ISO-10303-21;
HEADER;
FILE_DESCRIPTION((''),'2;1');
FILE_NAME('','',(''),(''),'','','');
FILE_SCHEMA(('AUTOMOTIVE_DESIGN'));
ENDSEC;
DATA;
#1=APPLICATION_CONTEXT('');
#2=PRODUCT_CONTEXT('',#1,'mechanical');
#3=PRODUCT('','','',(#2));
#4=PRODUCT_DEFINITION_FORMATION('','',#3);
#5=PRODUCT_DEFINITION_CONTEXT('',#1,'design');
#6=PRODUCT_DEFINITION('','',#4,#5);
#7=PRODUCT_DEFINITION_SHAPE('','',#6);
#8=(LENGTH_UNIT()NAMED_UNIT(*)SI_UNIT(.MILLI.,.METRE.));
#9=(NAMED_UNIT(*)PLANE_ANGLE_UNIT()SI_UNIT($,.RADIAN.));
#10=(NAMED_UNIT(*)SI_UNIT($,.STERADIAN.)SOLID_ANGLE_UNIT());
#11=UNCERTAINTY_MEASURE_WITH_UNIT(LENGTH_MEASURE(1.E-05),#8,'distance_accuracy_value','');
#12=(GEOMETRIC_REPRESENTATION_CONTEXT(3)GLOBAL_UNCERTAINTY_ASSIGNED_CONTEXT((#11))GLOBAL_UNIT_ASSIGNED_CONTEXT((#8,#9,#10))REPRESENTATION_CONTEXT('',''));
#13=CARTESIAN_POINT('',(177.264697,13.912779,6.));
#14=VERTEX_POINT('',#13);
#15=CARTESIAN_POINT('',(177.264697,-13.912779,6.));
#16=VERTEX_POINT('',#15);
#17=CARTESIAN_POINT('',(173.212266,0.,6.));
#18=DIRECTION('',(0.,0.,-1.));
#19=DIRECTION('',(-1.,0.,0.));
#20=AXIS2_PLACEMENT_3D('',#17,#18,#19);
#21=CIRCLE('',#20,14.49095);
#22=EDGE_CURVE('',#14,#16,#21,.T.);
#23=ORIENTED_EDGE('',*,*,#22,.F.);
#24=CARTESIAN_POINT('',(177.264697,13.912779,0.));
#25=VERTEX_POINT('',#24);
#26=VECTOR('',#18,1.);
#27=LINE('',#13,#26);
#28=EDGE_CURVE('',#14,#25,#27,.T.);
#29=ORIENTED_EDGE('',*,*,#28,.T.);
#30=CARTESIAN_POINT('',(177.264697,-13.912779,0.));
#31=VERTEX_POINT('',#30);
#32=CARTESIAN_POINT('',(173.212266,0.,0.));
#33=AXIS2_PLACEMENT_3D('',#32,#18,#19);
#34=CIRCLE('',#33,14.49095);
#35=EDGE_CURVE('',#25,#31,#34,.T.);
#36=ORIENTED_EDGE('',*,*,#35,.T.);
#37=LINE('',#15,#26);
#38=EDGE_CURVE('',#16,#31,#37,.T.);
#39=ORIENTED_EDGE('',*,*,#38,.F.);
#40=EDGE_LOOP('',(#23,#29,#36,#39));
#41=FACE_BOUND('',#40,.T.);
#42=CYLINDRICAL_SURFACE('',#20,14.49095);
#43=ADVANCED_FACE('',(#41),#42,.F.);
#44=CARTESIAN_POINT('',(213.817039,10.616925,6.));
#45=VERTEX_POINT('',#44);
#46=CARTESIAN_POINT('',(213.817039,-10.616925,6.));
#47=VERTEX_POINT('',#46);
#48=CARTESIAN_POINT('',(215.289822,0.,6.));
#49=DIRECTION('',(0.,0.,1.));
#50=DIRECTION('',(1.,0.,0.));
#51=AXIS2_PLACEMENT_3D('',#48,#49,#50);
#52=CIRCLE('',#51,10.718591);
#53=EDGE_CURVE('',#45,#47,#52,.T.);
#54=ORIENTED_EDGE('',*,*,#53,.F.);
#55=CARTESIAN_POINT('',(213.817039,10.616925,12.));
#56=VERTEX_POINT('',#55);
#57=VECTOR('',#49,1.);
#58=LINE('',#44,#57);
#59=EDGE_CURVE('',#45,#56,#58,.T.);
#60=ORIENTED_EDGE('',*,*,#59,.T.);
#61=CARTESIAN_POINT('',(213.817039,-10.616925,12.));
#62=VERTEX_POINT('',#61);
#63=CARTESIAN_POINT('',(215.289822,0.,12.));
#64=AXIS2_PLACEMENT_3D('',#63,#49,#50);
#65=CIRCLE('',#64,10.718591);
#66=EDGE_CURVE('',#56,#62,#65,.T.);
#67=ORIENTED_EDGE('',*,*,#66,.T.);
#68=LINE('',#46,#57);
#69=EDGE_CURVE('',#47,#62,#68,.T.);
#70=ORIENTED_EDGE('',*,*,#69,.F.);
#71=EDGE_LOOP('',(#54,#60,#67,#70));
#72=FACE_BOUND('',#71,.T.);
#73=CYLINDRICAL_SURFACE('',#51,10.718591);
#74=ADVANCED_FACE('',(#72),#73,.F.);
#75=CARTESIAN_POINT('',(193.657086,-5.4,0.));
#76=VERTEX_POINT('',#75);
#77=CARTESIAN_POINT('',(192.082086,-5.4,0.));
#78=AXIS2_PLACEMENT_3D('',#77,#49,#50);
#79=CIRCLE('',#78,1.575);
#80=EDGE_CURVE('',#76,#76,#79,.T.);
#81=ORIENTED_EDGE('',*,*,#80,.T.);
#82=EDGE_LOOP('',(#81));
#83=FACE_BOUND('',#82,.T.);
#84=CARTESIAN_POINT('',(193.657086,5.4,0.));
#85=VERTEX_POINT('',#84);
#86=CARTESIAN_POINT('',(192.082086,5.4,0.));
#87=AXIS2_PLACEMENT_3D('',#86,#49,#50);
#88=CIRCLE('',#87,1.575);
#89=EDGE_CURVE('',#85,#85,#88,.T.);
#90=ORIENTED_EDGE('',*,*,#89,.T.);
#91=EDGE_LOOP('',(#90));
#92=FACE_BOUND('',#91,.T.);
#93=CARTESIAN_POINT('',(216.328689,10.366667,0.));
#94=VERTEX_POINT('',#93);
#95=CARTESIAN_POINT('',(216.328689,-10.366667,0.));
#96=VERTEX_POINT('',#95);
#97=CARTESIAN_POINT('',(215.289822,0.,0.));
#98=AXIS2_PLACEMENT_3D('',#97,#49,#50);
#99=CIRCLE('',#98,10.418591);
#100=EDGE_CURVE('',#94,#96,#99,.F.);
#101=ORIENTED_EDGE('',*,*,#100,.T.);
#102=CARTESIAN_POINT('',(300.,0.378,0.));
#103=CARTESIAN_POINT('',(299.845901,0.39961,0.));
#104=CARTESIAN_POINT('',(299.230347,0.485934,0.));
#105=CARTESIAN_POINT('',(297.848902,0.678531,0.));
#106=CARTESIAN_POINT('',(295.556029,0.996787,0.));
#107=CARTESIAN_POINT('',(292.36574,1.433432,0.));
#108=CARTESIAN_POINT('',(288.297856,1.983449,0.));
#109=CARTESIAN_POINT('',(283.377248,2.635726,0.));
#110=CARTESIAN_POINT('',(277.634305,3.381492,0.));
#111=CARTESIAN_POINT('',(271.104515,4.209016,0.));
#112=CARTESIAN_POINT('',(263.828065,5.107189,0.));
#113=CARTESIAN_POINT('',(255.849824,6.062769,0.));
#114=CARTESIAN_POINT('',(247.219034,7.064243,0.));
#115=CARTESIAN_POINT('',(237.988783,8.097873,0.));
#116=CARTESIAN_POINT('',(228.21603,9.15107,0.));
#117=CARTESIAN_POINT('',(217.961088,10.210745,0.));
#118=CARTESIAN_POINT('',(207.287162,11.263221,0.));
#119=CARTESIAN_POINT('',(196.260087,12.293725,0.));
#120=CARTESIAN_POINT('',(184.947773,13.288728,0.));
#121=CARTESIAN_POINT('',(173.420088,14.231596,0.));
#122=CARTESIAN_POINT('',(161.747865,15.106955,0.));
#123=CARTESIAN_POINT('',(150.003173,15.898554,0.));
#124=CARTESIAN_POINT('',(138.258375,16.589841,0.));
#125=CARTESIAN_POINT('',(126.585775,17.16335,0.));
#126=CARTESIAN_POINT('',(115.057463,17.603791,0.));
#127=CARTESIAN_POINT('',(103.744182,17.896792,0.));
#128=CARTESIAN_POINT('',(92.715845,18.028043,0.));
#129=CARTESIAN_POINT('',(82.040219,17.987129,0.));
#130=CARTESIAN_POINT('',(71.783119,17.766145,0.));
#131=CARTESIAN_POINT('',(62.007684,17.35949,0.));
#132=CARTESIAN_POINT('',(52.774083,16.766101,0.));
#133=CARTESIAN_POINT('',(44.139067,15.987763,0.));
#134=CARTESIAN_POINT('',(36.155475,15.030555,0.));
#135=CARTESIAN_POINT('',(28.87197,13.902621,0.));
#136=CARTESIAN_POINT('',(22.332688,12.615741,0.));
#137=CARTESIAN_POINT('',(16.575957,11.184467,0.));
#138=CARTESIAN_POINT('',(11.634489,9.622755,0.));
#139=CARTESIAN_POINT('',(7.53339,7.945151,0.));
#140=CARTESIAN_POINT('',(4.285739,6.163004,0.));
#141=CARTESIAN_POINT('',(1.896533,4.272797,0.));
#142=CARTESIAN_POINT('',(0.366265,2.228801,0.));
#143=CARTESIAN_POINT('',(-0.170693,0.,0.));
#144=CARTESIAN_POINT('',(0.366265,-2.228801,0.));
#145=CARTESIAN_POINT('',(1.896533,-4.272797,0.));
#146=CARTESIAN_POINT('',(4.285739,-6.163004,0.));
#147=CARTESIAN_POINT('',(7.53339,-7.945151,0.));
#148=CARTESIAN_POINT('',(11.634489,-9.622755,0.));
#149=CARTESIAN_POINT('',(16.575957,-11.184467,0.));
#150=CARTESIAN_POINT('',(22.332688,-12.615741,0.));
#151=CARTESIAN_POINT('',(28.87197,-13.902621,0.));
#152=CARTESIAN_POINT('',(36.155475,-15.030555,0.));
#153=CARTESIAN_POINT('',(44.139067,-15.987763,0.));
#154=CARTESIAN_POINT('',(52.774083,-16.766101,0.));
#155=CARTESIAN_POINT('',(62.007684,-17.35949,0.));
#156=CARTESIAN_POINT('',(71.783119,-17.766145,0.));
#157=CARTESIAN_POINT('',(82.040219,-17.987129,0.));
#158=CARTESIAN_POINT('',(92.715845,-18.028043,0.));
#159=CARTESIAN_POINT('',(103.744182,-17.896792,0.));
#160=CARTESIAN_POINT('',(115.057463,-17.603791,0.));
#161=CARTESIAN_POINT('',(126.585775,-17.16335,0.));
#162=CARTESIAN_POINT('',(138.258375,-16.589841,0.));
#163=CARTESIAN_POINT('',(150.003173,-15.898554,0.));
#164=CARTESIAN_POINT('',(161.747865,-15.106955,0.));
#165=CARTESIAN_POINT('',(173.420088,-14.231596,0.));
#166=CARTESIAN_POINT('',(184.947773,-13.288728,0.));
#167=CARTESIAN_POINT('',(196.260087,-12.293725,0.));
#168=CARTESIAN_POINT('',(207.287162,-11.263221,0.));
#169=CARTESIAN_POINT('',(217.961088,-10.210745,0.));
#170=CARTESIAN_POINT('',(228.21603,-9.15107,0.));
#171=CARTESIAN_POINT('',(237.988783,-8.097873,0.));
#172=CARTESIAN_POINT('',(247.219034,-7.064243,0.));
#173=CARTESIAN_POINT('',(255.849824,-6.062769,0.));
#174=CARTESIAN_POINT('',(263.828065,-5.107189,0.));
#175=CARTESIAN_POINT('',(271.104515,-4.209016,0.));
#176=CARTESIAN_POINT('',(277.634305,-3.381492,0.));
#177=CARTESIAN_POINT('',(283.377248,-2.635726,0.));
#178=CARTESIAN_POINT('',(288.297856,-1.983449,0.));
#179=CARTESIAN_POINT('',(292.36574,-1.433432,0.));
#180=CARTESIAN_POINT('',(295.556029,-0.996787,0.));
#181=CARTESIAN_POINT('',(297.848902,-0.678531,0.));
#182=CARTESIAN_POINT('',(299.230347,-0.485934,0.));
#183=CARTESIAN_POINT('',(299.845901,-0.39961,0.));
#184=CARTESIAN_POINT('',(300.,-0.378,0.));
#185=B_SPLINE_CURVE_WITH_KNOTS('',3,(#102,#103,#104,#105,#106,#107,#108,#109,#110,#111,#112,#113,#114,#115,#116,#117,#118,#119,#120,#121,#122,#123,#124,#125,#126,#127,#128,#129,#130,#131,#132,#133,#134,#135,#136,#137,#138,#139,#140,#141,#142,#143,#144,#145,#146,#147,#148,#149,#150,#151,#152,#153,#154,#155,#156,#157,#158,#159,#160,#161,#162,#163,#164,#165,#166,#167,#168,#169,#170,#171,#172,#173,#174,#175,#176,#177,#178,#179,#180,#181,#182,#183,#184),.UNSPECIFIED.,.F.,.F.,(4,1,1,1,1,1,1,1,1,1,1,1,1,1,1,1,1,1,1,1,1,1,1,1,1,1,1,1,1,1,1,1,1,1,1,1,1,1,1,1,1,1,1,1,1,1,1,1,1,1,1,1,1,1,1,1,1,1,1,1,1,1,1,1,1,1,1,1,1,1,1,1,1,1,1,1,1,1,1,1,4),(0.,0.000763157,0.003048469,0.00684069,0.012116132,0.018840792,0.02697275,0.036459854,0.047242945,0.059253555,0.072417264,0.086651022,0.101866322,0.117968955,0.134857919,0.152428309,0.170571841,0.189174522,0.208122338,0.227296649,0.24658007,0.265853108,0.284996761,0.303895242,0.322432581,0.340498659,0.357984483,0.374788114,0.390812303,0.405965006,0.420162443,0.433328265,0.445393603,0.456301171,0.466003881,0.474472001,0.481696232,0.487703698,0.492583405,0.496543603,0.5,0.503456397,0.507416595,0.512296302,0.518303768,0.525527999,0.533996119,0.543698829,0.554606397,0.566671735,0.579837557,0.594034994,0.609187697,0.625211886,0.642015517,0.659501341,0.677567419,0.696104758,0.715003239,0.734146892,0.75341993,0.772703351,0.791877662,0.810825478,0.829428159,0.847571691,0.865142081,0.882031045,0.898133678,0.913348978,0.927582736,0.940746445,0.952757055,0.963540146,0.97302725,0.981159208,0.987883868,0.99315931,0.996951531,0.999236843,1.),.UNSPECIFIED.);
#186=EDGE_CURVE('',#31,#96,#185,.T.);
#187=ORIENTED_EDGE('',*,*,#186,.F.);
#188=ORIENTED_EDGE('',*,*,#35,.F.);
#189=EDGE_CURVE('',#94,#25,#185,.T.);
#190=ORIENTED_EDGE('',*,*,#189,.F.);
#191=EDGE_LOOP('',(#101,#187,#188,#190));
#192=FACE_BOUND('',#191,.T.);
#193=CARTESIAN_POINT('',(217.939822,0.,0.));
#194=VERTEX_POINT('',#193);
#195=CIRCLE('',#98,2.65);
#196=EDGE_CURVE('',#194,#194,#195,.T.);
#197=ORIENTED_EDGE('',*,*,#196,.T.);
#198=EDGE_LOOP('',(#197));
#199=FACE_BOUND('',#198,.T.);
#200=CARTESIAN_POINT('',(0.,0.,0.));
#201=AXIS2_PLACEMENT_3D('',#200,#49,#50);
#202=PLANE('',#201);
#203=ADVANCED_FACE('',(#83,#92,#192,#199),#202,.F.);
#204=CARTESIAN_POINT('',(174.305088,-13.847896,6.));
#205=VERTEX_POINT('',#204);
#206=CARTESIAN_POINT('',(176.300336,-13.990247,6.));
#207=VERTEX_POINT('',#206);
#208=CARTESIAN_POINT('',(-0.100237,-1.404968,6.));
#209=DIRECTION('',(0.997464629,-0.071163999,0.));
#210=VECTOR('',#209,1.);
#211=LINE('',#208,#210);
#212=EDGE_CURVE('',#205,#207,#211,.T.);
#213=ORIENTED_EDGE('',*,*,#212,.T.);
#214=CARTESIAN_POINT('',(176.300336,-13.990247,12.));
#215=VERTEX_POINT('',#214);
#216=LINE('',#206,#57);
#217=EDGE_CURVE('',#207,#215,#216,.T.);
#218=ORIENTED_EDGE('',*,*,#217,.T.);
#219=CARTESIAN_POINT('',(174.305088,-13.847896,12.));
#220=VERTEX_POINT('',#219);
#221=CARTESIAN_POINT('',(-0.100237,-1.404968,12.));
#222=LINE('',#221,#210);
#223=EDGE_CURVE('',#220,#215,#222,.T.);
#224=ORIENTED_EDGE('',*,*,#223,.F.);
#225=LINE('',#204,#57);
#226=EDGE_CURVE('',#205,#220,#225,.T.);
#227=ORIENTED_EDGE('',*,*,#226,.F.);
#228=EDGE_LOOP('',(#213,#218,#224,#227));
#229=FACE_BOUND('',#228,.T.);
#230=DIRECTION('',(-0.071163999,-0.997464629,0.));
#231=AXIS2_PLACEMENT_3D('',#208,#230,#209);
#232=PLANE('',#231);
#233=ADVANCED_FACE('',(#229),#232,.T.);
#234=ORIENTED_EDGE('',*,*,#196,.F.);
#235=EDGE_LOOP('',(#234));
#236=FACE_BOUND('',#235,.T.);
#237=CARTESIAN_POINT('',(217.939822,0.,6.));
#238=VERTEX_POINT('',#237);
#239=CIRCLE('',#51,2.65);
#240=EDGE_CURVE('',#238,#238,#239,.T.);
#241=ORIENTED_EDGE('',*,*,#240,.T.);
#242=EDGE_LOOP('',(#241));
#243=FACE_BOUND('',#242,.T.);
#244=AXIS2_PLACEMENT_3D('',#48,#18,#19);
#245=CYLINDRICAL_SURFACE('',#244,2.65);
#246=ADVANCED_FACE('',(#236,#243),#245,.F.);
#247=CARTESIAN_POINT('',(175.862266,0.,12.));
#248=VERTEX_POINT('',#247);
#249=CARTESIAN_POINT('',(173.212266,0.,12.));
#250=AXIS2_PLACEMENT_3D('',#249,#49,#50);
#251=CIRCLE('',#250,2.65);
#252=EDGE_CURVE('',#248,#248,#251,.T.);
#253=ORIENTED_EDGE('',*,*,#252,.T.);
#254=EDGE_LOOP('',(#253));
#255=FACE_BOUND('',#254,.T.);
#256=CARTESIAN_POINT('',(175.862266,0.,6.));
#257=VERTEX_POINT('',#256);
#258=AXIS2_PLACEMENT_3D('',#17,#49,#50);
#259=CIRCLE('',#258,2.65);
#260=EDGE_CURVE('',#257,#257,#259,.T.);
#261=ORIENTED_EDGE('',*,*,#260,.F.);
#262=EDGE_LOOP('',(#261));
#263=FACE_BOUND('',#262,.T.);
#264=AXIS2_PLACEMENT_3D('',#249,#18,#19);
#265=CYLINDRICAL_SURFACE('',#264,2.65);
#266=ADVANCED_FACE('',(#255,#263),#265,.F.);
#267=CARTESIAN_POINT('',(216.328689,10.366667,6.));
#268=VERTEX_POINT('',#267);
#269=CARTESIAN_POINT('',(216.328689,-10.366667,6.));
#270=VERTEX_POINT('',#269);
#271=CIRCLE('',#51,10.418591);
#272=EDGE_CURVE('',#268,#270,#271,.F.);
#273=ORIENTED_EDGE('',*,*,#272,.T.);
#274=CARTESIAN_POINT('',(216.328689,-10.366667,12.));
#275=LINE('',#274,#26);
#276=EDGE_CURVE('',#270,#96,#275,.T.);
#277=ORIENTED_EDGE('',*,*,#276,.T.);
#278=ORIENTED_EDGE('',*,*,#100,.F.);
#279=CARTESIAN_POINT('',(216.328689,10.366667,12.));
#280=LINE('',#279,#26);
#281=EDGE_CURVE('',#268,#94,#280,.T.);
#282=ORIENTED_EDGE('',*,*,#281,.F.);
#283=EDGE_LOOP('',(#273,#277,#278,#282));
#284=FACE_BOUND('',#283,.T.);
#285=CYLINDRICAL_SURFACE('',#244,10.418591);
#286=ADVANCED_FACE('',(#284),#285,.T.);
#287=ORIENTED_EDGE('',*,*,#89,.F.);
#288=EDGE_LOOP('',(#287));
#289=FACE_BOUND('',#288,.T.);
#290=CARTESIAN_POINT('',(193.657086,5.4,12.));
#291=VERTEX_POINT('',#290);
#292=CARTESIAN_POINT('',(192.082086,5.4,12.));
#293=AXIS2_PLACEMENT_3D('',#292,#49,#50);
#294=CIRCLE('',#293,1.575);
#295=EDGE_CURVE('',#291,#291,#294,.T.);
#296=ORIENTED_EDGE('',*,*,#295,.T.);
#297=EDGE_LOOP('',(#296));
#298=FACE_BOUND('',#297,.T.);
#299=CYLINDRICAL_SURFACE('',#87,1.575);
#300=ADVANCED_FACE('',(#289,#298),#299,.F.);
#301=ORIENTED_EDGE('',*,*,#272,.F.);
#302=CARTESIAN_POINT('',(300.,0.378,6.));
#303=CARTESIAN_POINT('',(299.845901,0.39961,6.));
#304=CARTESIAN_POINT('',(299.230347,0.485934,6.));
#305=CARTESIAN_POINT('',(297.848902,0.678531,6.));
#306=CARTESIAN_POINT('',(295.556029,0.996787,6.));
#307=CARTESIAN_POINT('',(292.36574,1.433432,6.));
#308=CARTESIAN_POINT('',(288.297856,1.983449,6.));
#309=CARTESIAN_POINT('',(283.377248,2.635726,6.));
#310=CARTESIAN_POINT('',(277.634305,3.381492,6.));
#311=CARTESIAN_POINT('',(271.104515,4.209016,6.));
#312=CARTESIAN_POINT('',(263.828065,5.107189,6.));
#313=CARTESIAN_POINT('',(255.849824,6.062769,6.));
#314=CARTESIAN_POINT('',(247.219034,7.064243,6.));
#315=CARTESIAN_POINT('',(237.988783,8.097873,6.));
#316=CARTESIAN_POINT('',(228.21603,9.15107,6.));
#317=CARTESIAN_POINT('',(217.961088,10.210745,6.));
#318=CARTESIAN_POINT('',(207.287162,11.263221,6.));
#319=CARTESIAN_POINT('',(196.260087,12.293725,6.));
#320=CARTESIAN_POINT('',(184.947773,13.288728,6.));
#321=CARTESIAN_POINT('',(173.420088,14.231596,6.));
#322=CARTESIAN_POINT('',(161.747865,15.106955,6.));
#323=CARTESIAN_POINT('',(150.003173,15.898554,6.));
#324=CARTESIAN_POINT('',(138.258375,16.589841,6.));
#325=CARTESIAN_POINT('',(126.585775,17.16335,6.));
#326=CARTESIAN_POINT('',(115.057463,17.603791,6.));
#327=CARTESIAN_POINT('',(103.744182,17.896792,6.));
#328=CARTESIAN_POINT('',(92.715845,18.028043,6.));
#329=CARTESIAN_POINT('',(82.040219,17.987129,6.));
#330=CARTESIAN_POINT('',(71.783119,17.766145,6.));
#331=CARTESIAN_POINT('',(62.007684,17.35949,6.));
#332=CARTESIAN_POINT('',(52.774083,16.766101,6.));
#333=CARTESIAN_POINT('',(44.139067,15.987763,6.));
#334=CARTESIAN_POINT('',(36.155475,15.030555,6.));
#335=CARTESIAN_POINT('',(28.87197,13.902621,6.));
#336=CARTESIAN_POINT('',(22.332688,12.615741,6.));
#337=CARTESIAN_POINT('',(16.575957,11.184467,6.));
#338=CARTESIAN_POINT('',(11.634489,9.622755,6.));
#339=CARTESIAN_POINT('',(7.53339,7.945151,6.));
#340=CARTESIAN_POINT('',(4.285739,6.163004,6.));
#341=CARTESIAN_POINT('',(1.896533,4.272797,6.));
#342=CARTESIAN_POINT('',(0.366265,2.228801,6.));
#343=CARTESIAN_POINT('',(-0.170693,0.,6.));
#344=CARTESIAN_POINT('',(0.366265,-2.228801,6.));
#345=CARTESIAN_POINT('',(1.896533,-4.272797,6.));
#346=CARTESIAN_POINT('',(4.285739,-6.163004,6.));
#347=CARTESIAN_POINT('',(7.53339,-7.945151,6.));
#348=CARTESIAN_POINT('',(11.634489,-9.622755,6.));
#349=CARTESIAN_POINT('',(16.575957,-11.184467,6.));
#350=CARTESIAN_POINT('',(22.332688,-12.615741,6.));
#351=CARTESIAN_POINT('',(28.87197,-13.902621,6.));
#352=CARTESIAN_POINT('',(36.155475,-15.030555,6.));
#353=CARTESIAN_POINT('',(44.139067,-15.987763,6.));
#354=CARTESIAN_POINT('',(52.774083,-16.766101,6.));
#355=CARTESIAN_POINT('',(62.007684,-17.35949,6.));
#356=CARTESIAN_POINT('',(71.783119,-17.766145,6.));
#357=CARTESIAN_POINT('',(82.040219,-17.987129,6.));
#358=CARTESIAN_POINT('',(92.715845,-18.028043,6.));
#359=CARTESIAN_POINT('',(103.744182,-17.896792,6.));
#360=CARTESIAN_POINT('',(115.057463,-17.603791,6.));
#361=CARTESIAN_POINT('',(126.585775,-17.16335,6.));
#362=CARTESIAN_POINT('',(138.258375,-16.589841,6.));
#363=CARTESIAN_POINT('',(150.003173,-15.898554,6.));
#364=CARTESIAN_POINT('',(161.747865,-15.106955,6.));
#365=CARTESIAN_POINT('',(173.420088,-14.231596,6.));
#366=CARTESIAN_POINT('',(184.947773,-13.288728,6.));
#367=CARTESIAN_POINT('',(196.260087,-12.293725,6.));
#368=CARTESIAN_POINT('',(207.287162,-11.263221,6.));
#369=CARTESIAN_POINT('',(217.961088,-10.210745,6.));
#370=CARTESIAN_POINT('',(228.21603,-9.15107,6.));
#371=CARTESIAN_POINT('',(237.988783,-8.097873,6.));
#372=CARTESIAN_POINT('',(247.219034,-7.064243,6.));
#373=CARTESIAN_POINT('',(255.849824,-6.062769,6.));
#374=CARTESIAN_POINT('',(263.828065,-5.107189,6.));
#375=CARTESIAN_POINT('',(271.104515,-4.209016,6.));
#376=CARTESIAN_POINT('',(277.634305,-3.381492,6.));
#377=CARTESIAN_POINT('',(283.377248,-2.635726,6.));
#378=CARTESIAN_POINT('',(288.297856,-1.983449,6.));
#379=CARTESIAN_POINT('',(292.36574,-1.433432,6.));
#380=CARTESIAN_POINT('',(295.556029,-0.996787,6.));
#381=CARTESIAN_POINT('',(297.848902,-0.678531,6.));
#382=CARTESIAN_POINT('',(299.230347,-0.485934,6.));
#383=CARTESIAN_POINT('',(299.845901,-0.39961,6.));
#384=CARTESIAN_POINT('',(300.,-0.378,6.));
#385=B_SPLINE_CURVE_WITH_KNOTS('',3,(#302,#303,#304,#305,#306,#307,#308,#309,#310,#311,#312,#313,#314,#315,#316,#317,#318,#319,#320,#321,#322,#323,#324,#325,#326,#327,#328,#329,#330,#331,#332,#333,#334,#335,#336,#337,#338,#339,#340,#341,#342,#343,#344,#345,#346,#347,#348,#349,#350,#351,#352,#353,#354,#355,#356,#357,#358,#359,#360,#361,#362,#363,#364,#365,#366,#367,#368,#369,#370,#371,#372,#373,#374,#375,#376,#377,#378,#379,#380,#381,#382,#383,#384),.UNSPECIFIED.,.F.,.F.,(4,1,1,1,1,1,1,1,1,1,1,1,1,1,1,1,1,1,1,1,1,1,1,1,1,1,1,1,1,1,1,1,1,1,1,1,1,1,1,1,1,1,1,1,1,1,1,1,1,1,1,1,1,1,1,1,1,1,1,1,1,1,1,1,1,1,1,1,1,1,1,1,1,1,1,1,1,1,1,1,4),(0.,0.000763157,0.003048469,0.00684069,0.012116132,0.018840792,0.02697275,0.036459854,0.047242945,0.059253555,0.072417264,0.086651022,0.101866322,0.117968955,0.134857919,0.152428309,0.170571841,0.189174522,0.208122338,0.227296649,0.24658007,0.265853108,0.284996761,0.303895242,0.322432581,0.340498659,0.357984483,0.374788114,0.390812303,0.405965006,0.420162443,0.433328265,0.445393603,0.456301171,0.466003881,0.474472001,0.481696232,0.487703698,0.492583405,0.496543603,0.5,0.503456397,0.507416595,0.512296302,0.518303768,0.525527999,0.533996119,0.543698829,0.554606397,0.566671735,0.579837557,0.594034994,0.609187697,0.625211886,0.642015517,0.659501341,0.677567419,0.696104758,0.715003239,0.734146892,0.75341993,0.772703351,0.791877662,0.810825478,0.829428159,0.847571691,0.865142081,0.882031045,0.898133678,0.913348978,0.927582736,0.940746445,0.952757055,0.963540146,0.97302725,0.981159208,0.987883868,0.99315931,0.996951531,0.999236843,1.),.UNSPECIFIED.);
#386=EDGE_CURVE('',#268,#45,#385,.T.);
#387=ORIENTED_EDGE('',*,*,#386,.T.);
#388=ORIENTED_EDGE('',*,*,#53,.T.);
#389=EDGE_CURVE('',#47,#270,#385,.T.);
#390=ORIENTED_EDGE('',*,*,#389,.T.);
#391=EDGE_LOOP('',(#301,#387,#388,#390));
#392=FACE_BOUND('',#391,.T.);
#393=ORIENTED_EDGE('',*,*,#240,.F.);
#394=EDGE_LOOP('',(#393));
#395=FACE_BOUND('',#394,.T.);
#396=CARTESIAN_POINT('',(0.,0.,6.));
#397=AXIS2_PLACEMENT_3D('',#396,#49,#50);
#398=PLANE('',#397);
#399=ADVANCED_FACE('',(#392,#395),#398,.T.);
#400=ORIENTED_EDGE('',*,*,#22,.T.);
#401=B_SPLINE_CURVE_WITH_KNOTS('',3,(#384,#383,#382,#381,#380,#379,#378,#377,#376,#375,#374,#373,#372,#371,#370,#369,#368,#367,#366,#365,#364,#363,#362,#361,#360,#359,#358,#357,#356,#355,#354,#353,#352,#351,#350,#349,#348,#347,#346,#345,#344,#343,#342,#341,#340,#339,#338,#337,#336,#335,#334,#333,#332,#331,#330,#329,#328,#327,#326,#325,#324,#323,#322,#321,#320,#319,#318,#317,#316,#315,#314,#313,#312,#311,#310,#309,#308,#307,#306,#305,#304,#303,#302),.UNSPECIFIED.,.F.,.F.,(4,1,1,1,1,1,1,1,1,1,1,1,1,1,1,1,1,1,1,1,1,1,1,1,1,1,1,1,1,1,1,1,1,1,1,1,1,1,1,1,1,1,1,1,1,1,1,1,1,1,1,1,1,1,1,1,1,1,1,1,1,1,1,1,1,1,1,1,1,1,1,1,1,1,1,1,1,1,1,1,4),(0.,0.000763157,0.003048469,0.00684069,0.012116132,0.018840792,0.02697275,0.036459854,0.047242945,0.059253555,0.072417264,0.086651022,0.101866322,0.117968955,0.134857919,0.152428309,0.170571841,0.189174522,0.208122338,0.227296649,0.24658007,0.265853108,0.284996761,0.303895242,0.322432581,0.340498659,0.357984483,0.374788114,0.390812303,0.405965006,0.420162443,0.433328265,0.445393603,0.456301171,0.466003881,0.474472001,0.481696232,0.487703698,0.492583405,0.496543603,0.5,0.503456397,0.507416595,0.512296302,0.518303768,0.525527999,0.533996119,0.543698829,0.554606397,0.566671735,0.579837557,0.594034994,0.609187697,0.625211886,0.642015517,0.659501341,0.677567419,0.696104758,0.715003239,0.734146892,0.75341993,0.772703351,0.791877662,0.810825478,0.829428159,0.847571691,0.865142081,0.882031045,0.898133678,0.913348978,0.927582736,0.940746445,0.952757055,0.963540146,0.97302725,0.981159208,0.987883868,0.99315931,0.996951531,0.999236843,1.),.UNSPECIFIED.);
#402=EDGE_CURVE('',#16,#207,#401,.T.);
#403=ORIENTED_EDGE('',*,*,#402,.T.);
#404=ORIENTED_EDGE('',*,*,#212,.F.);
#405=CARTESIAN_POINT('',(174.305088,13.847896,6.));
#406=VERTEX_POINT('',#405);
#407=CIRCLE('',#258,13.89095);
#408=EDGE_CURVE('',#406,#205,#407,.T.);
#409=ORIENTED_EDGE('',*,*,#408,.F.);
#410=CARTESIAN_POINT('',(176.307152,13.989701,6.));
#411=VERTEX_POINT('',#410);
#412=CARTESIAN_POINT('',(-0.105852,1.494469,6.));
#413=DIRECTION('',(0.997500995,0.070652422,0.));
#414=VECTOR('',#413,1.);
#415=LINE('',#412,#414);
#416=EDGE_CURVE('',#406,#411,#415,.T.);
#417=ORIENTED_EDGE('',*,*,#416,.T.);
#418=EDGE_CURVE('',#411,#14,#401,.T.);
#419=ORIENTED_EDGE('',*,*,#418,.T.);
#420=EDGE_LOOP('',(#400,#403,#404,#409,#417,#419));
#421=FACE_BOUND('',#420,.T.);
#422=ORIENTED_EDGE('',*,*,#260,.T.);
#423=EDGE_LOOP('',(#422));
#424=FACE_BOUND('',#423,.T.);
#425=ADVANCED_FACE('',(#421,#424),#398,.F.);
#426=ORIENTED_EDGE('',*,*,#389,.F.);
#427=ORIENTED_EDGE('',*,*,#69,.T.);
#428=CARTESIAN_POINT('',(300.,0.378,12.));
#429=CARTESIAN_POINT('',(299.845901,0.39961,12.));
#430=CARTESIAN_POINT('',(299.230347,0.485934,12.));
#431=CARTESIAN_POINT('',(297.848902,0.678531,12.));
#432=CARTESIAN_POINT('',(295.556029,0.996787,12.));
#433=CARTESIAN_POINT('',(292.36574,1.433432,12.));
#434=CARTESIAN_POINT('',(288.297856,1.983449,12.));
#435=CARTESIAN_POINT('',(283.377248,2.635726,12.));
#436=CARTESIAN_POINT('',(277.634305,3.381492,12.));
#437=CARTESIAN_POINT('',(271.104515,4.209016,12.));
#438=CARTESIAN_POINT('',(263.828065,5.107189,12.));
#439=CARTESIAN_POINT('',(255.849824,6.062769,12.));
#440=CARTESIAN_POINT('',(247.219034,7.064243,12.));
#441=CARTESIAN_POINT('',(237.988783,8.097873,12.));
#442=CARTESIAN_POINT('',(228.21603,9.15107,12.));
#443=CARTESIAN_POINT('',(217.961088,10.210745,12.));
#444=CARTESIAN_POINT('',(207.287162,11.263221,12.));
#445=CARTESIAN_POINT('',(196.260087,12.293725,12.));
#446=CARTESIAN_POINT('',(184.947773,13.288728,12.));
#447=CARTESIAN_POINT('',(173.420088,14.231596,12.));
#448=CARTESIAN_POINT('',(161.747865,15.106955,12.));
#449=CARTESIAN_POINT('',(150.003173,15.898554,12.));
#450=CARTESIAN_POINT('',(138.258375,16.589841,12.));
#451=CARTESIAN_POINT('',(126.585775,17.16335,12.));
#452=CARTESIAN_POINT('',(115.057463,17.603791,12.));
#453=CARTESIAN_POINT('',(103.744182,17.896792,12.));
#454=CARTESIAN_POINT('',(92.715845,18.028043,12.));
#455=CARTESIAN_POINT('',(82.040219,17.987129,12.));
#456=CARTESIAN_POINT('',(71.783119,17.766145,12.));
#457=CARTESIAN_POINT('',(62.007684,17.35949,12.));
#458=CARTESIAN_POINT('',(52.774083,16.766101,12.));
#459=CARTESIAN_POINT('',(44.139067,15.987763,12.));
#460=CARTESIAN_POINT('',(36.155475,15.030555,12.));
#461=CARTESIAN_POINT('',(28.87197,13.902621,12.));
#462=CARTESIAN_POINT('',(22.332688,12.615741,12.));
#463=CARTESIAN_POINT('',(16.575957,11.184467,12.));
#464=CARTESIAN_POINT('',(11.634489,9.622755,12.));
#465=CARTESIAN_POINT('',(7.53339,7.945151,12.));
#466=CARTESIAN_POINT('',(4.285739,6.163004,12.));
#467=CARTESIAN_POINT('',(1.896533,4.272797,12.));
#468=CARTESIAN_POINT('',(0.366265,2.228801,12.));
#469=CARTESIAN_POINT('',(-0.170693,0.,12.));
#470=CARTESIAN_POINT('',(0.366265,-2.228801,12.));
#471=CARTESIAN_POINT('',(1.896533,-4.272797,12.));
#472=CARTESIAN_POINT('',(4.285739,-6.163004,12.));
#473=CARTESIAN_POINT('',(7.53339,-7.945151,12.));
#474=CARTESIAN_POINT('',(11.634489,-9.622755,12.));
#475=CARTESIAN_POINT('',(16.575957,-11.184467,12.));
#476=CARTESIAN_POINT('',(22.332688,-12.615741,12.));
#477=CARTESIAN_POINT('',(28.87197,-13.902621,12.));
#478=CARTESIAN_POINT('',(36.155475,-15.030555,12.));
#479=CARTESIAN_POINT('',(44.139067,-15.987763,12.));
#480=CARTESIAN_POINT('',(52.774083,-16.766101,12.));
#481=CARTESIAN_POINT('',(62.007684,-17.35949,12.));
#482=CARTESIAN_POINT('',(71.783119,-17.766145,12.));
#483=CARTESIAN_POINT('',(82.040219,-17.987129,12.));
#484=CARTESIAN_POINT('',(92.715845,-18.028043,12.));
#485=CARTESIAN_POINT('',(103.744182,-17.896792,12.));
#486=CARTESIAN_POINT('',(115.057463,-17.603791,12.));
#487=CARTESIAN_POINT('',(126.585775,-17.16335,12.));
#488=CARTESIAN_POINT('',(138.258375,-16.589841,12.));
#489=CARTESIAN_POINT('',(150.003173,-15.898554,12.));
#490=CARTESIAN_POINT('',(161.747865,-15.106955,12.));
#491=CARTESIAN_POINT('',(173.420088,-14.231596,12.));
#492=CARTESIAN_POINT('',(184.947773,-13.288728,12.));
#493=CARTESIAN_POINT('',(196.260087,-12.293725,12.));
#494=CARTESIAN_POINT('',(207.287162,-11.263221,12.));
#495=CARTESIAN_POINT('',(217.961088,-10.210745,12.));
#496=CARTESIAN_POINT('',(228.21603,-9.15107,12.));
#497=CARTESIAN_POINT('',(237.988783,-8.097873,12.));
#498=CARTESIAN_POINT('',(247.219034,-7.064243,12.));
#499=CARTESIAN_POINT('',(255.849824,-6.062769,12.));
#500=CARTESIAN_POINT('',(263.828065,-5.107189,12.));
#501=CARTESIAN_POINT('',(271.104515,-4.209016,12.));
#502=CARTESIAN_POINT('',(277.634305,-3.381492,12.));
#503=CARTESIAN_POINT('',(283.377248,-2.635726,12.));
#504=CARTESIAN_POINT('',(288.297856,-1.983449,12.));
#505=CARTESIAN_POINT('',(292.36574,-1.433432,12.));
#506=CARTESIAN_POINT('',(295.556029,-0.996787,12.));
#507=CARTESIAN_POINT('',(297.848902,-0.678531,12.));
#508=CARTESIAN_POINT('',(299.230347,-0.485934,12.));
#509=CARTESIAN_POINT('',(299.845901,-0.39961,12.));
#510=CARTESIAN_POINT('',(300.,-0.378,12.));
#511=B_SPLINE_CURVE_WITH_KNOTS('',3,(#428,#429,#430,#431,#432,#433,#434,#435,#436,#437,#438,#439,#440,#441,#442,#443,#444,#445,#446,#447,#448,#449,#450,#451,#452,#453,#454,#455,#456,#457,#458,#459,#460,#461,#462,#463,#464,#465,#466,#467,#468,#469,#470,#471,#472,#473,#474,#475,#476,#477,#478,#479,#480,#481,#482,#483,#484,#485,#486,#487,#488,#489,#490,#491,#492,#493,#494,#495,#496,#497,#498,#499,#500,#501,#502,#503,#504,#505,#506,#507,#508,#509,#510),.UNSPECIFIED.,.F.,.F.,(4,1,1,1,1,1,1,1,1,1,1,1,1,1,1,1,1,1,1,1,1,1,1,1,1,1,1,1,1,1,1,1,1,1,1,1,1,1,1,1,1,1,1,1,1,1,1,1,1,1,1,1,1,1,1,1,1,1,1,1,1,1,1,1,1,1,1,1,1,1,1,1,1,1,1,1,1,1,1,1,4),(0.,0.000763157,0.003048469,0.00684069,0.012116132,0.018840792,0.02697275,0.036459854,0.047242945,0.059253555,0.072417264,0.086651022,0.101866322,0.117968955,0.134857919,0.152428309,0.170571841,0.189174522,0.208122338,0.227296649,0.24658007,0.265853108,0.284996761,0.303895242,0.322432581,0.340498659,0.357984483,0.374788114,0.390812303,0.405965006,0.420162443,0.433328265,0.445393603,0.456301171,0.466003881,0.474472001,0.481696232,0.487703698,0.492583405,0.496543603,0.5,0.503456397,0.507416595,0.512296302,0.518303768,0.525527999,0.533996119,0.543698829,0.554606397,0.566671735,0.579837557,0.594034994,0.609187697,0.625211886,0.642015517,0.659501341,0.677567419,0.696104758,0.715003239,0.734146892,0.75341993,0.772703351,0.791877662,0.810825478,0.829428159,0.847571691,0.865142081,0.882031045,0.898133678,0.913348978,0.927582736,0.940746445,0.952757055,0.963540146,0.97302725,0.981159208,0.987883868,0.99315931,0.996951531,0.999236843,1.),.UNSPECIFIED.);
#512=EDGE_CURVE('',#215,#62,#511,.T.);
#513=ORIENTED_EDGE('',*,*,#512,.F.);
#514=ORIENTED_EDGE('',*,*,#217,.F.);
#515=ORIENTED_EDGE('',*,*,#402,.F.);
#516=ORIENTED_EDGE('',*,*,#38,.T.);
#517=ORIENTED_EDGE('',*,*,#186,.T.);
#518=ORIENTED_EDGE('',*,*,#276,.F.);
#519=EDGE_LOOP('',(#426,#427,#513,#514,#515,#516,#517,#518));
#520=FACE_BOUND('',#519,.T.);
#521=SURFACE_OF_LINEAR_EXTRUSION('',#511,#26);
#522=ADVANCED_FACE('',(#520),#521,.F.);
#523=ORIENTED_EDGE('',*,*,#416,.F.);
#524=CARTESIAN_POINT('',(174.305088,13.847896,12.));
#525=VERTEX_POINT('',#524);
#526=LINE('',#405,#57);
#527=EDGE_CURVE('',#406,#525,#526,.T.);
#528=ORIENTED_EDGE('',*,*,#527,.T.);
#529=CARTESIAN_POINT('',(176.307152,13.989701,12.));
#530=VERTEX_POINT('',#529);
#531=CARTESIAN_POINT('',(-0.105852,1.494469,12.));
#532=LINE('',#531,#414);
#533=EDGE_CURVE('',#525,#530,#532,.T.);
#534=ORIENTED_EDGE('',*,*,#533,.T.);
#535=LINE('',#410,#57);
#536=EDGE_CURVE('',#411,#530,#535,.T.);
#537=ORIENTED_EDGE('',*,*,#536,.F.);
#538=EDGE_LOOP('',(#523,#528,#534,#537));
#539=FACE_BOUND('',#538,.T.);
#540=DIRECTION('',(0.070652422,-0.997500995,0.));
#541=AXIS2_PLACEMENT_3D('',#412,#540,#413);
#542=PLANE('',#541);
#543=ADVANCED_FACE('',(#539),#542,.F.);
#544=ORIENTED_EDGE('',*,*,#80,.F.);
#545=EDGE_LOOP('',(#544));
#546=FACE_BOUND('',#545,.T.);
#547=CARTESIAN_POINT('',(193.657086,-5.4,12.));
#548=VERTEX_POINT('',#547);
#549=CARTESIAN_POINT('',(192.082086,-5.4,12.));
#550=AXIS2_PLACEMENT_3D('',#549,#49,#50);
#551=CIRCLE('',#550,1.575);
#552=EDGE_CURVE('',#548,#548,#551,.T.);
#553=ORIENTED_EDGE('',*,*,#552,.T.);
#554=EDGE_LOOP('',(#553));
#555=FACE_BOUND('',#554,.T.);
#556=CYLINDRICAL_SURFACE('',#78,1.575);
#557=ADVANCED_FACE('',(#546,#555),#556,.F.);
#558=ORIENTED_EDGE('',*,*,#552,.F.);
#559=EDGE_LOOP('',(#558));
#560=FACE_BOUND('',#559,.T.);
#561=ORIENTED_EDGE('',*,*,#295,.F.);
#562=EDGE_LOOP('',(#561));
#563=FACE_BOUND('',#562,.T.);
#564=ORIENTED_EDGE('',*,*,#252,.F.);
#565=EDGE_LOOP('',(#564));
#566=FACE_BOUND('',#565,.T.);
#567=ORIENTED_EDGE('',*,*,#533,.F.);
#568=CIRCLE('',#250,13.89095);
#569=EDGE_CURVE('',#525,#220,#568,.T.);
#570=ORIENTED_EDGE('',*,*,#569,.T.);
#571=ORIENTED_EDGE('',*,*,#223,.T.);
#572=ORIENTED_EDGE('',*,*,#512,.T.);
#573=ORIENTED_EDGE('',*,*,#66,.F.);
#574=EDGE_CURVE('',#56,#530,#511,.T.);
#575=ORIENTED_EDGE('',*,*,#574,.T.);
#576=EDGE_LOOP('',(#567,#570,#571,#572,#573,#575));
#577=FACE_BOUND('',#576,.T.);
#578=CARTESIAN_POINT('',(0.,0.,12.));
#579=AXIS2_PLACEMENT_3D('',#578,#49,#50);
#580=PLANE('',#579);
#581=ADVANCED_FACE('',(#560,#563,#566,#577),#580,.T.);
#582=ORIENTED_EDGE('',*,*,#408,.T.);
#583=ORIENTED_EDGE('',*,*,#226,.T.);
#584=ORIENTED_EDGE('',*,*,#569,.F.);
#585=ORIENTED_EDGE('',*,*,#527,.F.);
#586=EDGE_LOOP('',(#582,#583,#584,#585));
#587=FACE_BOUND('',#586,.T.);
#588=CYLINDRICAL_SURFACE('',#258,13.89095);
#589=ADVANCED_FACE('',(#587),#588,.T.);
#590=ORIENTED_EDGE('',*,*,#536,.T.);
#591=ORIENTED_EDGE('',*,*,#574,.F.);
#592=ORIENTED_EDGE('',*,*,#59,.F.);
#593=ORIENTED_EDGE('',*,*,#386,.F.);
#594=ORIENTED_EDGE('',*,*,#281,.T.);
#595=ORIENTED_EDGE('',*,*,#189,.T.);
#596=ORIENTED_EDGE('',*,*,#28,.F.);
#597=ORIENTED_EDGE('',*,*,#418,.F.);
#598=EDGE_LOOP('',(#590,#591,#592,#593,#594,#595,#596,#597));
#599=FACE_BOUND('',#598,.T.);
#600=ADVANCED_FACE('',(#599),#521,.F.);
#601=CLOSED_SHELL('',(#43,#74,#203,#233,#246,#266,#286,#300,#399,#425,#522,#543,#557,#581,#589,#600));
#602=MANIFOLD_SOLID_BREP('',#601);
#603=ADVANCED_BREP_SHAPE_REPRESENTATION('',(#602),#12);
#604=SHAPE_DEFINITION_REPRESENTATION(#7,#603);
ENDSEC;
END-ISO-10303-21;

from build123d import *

# Parameters (mm, degrees)
BOSS_EXTRUDE13_START = 6
BOSS_EXTRUDE13_DEPTH = 6
BOSS_EXTRUDE14_DEPTH = 12
SKETCH2_19_R         = 10.418590799
SKETCH2_19_R_2       = 2.65
BOSS_EXTRUDE15_DEPTH = 6
CUT_EXTRUDE1_START   = -6
CUT_EXTRUDE1_DEPTH   = 6
CUT_EXTRUDE2_START   = -12
CUT_EXTRUDE2_DEPTH   = 6
CUT_EXTRUDE4_DEPTH   = 6
SKETCH6_R            = 1.575
CUT_EXTRUDE5_DEPTH   = 227.459741668


# Read off the part's stored shape, not the designer's step: Cut-Extrude2
with BuildPart() as part:
    # Sketch2 → Boss-Extrude13 (new body)
    with BuildSketch(Plane.XY.offset(BOSS_EXTRUDE13_START)):
        with BuildLine():
            ThreePointArc((173.212265813, 14.190949605), (163.177749116, 10.034516697), (159.021316208, 0))
            Line((159.021316208, 0), (170.562265813, 0))
            ThreePointArc((170.562265813, 0), (171.338432843, 1.87383297), (173.212265813, 2.65))
            Line((173.212265813, 2.65), (173.212265813, 14.190949605))
        make_face()
        with BuildLine():
            Line((170.562265813, 0), (159.021316208, 0))
            ThreePointArc((159.021316208, 0), (163.177749116, -10.034516697), (173.212265813, -14.190949605))
            Line((173.212265813, -14.190949605), (173.212265813, -2.65))
            ThreePointArc((173.212265813, -2.65), (171.338432843, -1.87383297), (170.562265813, 0))
        make_face()
        with BuildLine():
            ThreePointArc((187.403215418, 0), (183.634025716, 9.63171694), (174.328689217, 14.146966087))
            ThreePointArc((174.328689217, 14.146966087), (173.77091055, 14.179949462), (173.212265813, 14.190949605))
            Line((173.212265813, 14.190949605), (173.212265813, 2.65))
            ThreePointArc((173.212265813, 2.65), (175.086098783, 1.87383297), (175.862265813, 0))
            Line((175.862265813, 0), (187.403215418, 0))
        make_face()
        with BuildLine():
            ThreePointArc((173.212265813, -14.190949605), (173.77091055, -14.179949462), (174.328689217, -14.146966087))
            ThreePointArc((174.328689217, -14.146966087), (183.634025716, -9.63171694), (187.403215418, 0))
            Line((187.403215418, 0), (175.862265813, 0))
            ThreePointArc((175.862265813, 0), (175.086098783, -1.87383297), (173.212265813, -2.65))
            Line((173.212265813, -2.65), (173.212265813, -14.190949605))
        make_face()
        with BuildLine():
            ThreePointArc((173.212265813, 14.190949605), (163.177749116, 10.034516697), (159.021316208, 0))
            Line((159.021316208, 0), (170.562265813, 0))
            ThreePointArc((170.562265813, 0), (171.338432843, 1.87383297), (173.212265813, 2.65))
            Line((173.212265813, 2.65), (173.212265813, 14.190949605))
        make_face()
        with BuildLine():
            Line((170.562265813, 0), (159.021316208, 0))
            ThreePointArc((159.021316208, 0), (163.177749116, -10.034516697), (173.212265813, -14.190949605))
            Line((173.212265813, -14.190949605), (173.212265813, -2.65))
            ThreePointArc((173.212265813, -2.65), (171.338432843, -1.87383297), (170.562265813, 0))
        make_face()
        with BuildLine():
            ThreePointArc((187.403215418, 0), (183.634025716, 9.63171694), (174.328689217, 14.146966087))
            ThreePointArc((174.328689217, 14.146966087), (173.77091055, 14.179949462), (173.212265813, 14.190949605))
            Line((173.212265813, 14.190949605), (173.212265813, 2.65))
            ThreePointArc((173.212265813, 2.65), (175.086098783, 1.87383297), (175.862265813, 0))
            Line((175.862265813, 0), (187.403215418, 0))
        make_face()
        with BuildLine():
            ThreePointArc((173.212265813, -14.190949605), (173.77091055, -14.179949462), (174.328689217, -14.146966087))
            ThreePointArc((174.328689217, -14.146966087), (183.634025716, -9.63171694), (187.403215418, 0))
            Line((187.403215418, 0), (175.862265813, 0))
            ThreePointArc((175.862265813, 0), (175.086098783, -1.87383297), (173.212265813, -2.65))
            Line((173.212265813, -2.65), (173.212265813, -14.190949605))
        make_face()
    extrude(amount=BOSS_EXTRUDE13_DEPTH)

    # Sketch2<18> → Boss-Extrude14 (add)
    with BuildSketch(Plane.XY):
        with BuildLine():
            add(Edge.make_bspline(
                [(216.328689217, 10.366667201), (213.353925458, 10.66477506), (206.696816501, 11.318389968), (196.26008685, 12.293724806), (185.235415917, 13.263427762), (177.892295007, 13.865740213), (174.328689217, 14.146966087)],
                knots=[0.137765812, 0.137765812, 0.137765812, 0.137765812, 0.152428309, 0.170571841, 0.189174522, 0.206706183, 0.206706183, 0.206706183, 0.206706183], degree=3))
            ThreePointArc((174.328689217, 14.146966087), (183.634025716, 9.63171694), (187.403215418, 0))
            Line((187.403215418, 0), (204.87123106, 0))
            ThreePointArc((204.87123106, 0), (207.922765654, 7.367056204), (215.289821859, 10.418590799))
            ThreePointArc((215.289821859, 10.418590799), (215.809903931, 10.405601803), (216.328689217, 10.366667201))
        make_face()
        with BuildLine():
            ThreePointArc((187.403215418, 0), (183.634025716, -9.63171694), (174.328689217, -14.146966087))
            add(Edge.make_bspline(
                [(174.328689217, -14.146966087), (177.892295007, -13.865740213), (185.235415917, -13.263427762), (196.26008685, -12.293724806), (206.696816501, -11.318389968), (213.353925458, -10.66477506), (216.328689217, -10.366667201)],
                knots=[0.793293817, 0.793293817, 0.793293817, 0.793293817, 0.810825478, 0.829428159, 0.847571691, 0.862234188, 0.862234188, 0.862234188, 0.862234188], degree=3))
            ThreePointArc((216.328689217, -10.366667201), (215.809903931, -10.405601803), (215.289821859, -10.418590799))
            ThreePointArc((215.289821859, -10.418590799), (207.922765654, -7.367056204), (204.87123106, 0))
            Line((204.87123106, 0), (187.403215418, 0))
        make_face()
        with BuildLine():
            add(Edge.make_bspline(
                [(216.328689217, 10.366667201), (213.353925458, 10.66477506), (206.696816501, 11.318389968), (196.26008685, 12.293724806), (185.235415917, 13.263427762), (177.892295007, 13.865740213), (174.328689217, 14.146966087)],
                knots=[0.137765812, 0.137765812, 0.137765812, 0.137765812, 0.152428309, 0.170571841, 0.189174522, 0.206706183, 0.206706183, 0.206706183, 0.206706183], degree=3))
            ThreePointArc((174.328689217, 14.146966087), (183.634025716, 9.63171694), (187.403215418, 0))
            Line((187.403215418, 0), (204.87123106, 0))
            ThreePointArc((204.87123106, 0), (207.922765654, 7.367056204), (215.289821859, 10.418590799))
            ThreePointArc((215.289821859, 10.418590799), (215.809903931, 10.405601803), (216.328689217, 10.366667201))
        make_face()
        with BuildLine():
            ThreePointArc((187.403215418, 0), (183.634025716, -9.63171694), (174.328689217, -14.146966087))
            add(Edge.make_bspline(
                [(174.328689217, -14.146966087), (177.892295007, -13.865740213), (185.235415917, -13.263427762), (196.26008685, -12.293724806), (206.696816501, -11.318389968), (213.353925458, -10.66477506), (216.328689217, -10.366667201)],
                knots=[0.793293817, 0.793293817, 0.793293817, 0.793293817, 0.810825478, 0.829428159, 0.847571691, 0.862234188, 0.862234188, 0.862234188, 0.862234188], degree=3))
            ThreePointArc((216.328689217, -10.366667201), (215.809903931, -10.405601803), (215.289821859, -10.418590799))
            ThreePointArc((215.289821859, -10.418590799), (207.922765654, -7.367056204), (204.87123106, 0))
            Line((204.87123106, 0), (187.403215418, 0))
        make_face()
    extrude(amount=BOSS_EXTRUDE14_DEPTH)

    # Sketch2<19> → Boss-Extrude15 (add)
    with BuildSketch(Plane.XY):
        with Locations((215.289821859, 0)):
            Circle(SKETCH2_19_R)
        with Locations((215.289821859, 0)):
            Circle(SKETCH2_19_R_2, mode=Mode.SUBTRACT)
    extrude(amount=BOSS_EXTRUDE15_DEPTH)

    # Sketch3 → Cut-Extrude1 (cut)
    with BuildSketch(Plane.XY.offset(12).offset(CUT_EXTRUDE1_START)):
        with BuildLine():
            ThreePointArc((174.305087765, -13.847895909), (159.321316208, 0), (174.305087765, 13.847895909))
            Line((174.305087765, 13.847895909), (176.307152097, 13.989700975))
            add(Edge.make_bspline(
                [(176.307152097, 13.989700975), (175.647694257, 14.042496099), (174.988206638, 14.094919544), (174.328689217, 14.146966087)],
                knots=[0.203461594, 0.203461594, 0.203461594, 0.203461594, 0.206706183, 0.206706183, 0.206706183, 0.206706183], degree=3))
            ThreePointArc((174.328689217, 14.146966087), (159.021316208, 0), (174.328689217, -14.146966087))
            add(Edge.make_bspline(
                [(174.328689217, -14.146966087), (174.985934365, -14.095098863), (175.643149915, -14.04285733), (176.300335892, -13.990246656)],
                knots=[0.793293817, 0.793293817, 0.793293817, 0.793293817, 0.796527227, 0.796527227, 0.796527227, 0.796527227], degree=3))
            Line((176.300335892, -13.990246656), (174.305087765, -13.847895909))
        make_face()
        with BuildLine():
            add(Edge.make_bspline(
                [(216.328689217, 10.366667201), (215.491519854, 10.450561851), (214.654303032, 10.533983064), (213.817038746, 10.616925102)],
                knots=[0.137765812, 0.137765812, 0.137765812, 0.137765812, 0.141892188, 0.141892188, 0.141892188, 0.141892188], degree=3))
            ThreePointArc((213.817038746, 10.616925102), (204.57123106, 0), (213.817038746, -10.616925102))
            add(Edge.make_bspline(
                [(213.817038746, -10.616925102), (214.654303032, -10.533983064), (215.491519854, -10.450561851), (216.328689217, -10.366667201)],
                knots=[0.858107812, 0.858107812, 0.858107812, 0.858107812, 0.862234188, 0.862234188, 0.862234188, 0.862234188], degree=3))
            ThreePointArc((216.328689217, -10.366667201), (204.87123106, 0), (216.328689217, 10.366667201))
        make_face()
    extrude(amount=CUT_EXTRUDE1_DEPTH, mode=Mode.SUBTRACT)

    # Cut-Extrude2 outline → Cut-Extrude2 (cut)
    with BuildSketch(Plane.XY.offset(12).offset(CUT_EXTRUDE2_START)):
        with BuildLine():
            ThreePointArc((174.328689217, 14.146966087), (175.06538064, 14.06943553), (175.797022727, 13.953568804))
            Line((175.797022727, 13.953568804), (176.307152091, 13.989700975))
            add(Edge.make_bspline(
                [(176.307152091, 13.989700975), (175.647694253, 14.042496099), (174.988206637, 14.094919544), (174.328689217, 14.146966087)],
                knots=[0.203461594, 0.203461594, 0.203461594, 0.203461594, 0.206706183, 0.206706183, 0.206706183, 0.206706183], degree=3))
        make_face()
        with BuildLine():
            Line((176.300335892, -13.990246656), (175.794024244, -13.95412391))
            ThreePointArc((175.794024244, -13.95412391), (175.063868969, -14.069634552), (174.328689217, -14.146966087))
            add(Edge.make_bspline(
                [(174.328689217, -14.146966087), (174.985934365, -14.095098863), (175.643149916, -14.04285733), (176.300335892, -13.990246656)],
                knots=[0.793293817, 0.793293817, 0.793293817, 0.793293817, 0.796527227, 0.796527227, 0.796527227, 0.796527227], degree=3))
        make_face()
    extrude(amount=CUT_EXTRUDE2_DEPTH, mode=Mode.SUBTRACT)

    # Sketch5 → Cut-Extrude4 (cut)
    with BuildSketch(Plane(origin=(0, 0, 0), x_dir=(-1, 0, 0), z_dir=(0, 0, -1))):
        with BuildLine():
            add(Edge.make_bspline(
                [(-177.264696566, -13.912779214), (-176.943250082, -13.938689614), (-176.621796525, -13.964512296), (-176.300335892, -13.990246656)],
                knots=[0.860652575, 0.860652575, 0.860652575, 0.860652575, 0.862234188, 0.862234188, 0.862234188, 0.862234188], degree=3))
            Line((-176.300335892, -13.990246656), (-175.794024244, -13.95412391))
            ThreePointArc((-175.794024244, -13.95412391), (-187.403215336, -0.001524716), (-175.797022727, 13.953568805))
            Line((-175.797022727, 13.953568805), (-176.307152091, 13.989700975))
            add(Edge.make_bspline(
                [(-176.307152091, 13.989700975), (-176.626340558, 13.964147265), (-176.945522049, 13.93850648), (-177.264696566, 13.912779214)],
                knots=[0.137765812, 0.137765812, 0.137765812, 0.137765812, 0.139336246, 0.139336246, 0.139336246, 0.139336246], degree=3))
            ThreePointArc((-177.264696566, 13.912779214), (-187.703215418, 0), (-177.264696566, -13.912779214))
        make_face()
    extrude(amount=-CUT_EXTRUDE4_DEPTH, mode=Mode.SUBTRACT)

    # Sketch6 → Cut-Extrude5 (cut, through all)
    with BuildSketch(Plane.XY.offset(12)):
        with Locations((192.082086145, 5.4)):
            Circle(SKETCH6_R)
        with Locations((192.082086145, -5.4)):
            Circle(SKETCH6_R)
    extrude(amount=-CUT_EXTRUDE5_DEPTH, mode=Mode.SUBTRACT)


solid = part.part
